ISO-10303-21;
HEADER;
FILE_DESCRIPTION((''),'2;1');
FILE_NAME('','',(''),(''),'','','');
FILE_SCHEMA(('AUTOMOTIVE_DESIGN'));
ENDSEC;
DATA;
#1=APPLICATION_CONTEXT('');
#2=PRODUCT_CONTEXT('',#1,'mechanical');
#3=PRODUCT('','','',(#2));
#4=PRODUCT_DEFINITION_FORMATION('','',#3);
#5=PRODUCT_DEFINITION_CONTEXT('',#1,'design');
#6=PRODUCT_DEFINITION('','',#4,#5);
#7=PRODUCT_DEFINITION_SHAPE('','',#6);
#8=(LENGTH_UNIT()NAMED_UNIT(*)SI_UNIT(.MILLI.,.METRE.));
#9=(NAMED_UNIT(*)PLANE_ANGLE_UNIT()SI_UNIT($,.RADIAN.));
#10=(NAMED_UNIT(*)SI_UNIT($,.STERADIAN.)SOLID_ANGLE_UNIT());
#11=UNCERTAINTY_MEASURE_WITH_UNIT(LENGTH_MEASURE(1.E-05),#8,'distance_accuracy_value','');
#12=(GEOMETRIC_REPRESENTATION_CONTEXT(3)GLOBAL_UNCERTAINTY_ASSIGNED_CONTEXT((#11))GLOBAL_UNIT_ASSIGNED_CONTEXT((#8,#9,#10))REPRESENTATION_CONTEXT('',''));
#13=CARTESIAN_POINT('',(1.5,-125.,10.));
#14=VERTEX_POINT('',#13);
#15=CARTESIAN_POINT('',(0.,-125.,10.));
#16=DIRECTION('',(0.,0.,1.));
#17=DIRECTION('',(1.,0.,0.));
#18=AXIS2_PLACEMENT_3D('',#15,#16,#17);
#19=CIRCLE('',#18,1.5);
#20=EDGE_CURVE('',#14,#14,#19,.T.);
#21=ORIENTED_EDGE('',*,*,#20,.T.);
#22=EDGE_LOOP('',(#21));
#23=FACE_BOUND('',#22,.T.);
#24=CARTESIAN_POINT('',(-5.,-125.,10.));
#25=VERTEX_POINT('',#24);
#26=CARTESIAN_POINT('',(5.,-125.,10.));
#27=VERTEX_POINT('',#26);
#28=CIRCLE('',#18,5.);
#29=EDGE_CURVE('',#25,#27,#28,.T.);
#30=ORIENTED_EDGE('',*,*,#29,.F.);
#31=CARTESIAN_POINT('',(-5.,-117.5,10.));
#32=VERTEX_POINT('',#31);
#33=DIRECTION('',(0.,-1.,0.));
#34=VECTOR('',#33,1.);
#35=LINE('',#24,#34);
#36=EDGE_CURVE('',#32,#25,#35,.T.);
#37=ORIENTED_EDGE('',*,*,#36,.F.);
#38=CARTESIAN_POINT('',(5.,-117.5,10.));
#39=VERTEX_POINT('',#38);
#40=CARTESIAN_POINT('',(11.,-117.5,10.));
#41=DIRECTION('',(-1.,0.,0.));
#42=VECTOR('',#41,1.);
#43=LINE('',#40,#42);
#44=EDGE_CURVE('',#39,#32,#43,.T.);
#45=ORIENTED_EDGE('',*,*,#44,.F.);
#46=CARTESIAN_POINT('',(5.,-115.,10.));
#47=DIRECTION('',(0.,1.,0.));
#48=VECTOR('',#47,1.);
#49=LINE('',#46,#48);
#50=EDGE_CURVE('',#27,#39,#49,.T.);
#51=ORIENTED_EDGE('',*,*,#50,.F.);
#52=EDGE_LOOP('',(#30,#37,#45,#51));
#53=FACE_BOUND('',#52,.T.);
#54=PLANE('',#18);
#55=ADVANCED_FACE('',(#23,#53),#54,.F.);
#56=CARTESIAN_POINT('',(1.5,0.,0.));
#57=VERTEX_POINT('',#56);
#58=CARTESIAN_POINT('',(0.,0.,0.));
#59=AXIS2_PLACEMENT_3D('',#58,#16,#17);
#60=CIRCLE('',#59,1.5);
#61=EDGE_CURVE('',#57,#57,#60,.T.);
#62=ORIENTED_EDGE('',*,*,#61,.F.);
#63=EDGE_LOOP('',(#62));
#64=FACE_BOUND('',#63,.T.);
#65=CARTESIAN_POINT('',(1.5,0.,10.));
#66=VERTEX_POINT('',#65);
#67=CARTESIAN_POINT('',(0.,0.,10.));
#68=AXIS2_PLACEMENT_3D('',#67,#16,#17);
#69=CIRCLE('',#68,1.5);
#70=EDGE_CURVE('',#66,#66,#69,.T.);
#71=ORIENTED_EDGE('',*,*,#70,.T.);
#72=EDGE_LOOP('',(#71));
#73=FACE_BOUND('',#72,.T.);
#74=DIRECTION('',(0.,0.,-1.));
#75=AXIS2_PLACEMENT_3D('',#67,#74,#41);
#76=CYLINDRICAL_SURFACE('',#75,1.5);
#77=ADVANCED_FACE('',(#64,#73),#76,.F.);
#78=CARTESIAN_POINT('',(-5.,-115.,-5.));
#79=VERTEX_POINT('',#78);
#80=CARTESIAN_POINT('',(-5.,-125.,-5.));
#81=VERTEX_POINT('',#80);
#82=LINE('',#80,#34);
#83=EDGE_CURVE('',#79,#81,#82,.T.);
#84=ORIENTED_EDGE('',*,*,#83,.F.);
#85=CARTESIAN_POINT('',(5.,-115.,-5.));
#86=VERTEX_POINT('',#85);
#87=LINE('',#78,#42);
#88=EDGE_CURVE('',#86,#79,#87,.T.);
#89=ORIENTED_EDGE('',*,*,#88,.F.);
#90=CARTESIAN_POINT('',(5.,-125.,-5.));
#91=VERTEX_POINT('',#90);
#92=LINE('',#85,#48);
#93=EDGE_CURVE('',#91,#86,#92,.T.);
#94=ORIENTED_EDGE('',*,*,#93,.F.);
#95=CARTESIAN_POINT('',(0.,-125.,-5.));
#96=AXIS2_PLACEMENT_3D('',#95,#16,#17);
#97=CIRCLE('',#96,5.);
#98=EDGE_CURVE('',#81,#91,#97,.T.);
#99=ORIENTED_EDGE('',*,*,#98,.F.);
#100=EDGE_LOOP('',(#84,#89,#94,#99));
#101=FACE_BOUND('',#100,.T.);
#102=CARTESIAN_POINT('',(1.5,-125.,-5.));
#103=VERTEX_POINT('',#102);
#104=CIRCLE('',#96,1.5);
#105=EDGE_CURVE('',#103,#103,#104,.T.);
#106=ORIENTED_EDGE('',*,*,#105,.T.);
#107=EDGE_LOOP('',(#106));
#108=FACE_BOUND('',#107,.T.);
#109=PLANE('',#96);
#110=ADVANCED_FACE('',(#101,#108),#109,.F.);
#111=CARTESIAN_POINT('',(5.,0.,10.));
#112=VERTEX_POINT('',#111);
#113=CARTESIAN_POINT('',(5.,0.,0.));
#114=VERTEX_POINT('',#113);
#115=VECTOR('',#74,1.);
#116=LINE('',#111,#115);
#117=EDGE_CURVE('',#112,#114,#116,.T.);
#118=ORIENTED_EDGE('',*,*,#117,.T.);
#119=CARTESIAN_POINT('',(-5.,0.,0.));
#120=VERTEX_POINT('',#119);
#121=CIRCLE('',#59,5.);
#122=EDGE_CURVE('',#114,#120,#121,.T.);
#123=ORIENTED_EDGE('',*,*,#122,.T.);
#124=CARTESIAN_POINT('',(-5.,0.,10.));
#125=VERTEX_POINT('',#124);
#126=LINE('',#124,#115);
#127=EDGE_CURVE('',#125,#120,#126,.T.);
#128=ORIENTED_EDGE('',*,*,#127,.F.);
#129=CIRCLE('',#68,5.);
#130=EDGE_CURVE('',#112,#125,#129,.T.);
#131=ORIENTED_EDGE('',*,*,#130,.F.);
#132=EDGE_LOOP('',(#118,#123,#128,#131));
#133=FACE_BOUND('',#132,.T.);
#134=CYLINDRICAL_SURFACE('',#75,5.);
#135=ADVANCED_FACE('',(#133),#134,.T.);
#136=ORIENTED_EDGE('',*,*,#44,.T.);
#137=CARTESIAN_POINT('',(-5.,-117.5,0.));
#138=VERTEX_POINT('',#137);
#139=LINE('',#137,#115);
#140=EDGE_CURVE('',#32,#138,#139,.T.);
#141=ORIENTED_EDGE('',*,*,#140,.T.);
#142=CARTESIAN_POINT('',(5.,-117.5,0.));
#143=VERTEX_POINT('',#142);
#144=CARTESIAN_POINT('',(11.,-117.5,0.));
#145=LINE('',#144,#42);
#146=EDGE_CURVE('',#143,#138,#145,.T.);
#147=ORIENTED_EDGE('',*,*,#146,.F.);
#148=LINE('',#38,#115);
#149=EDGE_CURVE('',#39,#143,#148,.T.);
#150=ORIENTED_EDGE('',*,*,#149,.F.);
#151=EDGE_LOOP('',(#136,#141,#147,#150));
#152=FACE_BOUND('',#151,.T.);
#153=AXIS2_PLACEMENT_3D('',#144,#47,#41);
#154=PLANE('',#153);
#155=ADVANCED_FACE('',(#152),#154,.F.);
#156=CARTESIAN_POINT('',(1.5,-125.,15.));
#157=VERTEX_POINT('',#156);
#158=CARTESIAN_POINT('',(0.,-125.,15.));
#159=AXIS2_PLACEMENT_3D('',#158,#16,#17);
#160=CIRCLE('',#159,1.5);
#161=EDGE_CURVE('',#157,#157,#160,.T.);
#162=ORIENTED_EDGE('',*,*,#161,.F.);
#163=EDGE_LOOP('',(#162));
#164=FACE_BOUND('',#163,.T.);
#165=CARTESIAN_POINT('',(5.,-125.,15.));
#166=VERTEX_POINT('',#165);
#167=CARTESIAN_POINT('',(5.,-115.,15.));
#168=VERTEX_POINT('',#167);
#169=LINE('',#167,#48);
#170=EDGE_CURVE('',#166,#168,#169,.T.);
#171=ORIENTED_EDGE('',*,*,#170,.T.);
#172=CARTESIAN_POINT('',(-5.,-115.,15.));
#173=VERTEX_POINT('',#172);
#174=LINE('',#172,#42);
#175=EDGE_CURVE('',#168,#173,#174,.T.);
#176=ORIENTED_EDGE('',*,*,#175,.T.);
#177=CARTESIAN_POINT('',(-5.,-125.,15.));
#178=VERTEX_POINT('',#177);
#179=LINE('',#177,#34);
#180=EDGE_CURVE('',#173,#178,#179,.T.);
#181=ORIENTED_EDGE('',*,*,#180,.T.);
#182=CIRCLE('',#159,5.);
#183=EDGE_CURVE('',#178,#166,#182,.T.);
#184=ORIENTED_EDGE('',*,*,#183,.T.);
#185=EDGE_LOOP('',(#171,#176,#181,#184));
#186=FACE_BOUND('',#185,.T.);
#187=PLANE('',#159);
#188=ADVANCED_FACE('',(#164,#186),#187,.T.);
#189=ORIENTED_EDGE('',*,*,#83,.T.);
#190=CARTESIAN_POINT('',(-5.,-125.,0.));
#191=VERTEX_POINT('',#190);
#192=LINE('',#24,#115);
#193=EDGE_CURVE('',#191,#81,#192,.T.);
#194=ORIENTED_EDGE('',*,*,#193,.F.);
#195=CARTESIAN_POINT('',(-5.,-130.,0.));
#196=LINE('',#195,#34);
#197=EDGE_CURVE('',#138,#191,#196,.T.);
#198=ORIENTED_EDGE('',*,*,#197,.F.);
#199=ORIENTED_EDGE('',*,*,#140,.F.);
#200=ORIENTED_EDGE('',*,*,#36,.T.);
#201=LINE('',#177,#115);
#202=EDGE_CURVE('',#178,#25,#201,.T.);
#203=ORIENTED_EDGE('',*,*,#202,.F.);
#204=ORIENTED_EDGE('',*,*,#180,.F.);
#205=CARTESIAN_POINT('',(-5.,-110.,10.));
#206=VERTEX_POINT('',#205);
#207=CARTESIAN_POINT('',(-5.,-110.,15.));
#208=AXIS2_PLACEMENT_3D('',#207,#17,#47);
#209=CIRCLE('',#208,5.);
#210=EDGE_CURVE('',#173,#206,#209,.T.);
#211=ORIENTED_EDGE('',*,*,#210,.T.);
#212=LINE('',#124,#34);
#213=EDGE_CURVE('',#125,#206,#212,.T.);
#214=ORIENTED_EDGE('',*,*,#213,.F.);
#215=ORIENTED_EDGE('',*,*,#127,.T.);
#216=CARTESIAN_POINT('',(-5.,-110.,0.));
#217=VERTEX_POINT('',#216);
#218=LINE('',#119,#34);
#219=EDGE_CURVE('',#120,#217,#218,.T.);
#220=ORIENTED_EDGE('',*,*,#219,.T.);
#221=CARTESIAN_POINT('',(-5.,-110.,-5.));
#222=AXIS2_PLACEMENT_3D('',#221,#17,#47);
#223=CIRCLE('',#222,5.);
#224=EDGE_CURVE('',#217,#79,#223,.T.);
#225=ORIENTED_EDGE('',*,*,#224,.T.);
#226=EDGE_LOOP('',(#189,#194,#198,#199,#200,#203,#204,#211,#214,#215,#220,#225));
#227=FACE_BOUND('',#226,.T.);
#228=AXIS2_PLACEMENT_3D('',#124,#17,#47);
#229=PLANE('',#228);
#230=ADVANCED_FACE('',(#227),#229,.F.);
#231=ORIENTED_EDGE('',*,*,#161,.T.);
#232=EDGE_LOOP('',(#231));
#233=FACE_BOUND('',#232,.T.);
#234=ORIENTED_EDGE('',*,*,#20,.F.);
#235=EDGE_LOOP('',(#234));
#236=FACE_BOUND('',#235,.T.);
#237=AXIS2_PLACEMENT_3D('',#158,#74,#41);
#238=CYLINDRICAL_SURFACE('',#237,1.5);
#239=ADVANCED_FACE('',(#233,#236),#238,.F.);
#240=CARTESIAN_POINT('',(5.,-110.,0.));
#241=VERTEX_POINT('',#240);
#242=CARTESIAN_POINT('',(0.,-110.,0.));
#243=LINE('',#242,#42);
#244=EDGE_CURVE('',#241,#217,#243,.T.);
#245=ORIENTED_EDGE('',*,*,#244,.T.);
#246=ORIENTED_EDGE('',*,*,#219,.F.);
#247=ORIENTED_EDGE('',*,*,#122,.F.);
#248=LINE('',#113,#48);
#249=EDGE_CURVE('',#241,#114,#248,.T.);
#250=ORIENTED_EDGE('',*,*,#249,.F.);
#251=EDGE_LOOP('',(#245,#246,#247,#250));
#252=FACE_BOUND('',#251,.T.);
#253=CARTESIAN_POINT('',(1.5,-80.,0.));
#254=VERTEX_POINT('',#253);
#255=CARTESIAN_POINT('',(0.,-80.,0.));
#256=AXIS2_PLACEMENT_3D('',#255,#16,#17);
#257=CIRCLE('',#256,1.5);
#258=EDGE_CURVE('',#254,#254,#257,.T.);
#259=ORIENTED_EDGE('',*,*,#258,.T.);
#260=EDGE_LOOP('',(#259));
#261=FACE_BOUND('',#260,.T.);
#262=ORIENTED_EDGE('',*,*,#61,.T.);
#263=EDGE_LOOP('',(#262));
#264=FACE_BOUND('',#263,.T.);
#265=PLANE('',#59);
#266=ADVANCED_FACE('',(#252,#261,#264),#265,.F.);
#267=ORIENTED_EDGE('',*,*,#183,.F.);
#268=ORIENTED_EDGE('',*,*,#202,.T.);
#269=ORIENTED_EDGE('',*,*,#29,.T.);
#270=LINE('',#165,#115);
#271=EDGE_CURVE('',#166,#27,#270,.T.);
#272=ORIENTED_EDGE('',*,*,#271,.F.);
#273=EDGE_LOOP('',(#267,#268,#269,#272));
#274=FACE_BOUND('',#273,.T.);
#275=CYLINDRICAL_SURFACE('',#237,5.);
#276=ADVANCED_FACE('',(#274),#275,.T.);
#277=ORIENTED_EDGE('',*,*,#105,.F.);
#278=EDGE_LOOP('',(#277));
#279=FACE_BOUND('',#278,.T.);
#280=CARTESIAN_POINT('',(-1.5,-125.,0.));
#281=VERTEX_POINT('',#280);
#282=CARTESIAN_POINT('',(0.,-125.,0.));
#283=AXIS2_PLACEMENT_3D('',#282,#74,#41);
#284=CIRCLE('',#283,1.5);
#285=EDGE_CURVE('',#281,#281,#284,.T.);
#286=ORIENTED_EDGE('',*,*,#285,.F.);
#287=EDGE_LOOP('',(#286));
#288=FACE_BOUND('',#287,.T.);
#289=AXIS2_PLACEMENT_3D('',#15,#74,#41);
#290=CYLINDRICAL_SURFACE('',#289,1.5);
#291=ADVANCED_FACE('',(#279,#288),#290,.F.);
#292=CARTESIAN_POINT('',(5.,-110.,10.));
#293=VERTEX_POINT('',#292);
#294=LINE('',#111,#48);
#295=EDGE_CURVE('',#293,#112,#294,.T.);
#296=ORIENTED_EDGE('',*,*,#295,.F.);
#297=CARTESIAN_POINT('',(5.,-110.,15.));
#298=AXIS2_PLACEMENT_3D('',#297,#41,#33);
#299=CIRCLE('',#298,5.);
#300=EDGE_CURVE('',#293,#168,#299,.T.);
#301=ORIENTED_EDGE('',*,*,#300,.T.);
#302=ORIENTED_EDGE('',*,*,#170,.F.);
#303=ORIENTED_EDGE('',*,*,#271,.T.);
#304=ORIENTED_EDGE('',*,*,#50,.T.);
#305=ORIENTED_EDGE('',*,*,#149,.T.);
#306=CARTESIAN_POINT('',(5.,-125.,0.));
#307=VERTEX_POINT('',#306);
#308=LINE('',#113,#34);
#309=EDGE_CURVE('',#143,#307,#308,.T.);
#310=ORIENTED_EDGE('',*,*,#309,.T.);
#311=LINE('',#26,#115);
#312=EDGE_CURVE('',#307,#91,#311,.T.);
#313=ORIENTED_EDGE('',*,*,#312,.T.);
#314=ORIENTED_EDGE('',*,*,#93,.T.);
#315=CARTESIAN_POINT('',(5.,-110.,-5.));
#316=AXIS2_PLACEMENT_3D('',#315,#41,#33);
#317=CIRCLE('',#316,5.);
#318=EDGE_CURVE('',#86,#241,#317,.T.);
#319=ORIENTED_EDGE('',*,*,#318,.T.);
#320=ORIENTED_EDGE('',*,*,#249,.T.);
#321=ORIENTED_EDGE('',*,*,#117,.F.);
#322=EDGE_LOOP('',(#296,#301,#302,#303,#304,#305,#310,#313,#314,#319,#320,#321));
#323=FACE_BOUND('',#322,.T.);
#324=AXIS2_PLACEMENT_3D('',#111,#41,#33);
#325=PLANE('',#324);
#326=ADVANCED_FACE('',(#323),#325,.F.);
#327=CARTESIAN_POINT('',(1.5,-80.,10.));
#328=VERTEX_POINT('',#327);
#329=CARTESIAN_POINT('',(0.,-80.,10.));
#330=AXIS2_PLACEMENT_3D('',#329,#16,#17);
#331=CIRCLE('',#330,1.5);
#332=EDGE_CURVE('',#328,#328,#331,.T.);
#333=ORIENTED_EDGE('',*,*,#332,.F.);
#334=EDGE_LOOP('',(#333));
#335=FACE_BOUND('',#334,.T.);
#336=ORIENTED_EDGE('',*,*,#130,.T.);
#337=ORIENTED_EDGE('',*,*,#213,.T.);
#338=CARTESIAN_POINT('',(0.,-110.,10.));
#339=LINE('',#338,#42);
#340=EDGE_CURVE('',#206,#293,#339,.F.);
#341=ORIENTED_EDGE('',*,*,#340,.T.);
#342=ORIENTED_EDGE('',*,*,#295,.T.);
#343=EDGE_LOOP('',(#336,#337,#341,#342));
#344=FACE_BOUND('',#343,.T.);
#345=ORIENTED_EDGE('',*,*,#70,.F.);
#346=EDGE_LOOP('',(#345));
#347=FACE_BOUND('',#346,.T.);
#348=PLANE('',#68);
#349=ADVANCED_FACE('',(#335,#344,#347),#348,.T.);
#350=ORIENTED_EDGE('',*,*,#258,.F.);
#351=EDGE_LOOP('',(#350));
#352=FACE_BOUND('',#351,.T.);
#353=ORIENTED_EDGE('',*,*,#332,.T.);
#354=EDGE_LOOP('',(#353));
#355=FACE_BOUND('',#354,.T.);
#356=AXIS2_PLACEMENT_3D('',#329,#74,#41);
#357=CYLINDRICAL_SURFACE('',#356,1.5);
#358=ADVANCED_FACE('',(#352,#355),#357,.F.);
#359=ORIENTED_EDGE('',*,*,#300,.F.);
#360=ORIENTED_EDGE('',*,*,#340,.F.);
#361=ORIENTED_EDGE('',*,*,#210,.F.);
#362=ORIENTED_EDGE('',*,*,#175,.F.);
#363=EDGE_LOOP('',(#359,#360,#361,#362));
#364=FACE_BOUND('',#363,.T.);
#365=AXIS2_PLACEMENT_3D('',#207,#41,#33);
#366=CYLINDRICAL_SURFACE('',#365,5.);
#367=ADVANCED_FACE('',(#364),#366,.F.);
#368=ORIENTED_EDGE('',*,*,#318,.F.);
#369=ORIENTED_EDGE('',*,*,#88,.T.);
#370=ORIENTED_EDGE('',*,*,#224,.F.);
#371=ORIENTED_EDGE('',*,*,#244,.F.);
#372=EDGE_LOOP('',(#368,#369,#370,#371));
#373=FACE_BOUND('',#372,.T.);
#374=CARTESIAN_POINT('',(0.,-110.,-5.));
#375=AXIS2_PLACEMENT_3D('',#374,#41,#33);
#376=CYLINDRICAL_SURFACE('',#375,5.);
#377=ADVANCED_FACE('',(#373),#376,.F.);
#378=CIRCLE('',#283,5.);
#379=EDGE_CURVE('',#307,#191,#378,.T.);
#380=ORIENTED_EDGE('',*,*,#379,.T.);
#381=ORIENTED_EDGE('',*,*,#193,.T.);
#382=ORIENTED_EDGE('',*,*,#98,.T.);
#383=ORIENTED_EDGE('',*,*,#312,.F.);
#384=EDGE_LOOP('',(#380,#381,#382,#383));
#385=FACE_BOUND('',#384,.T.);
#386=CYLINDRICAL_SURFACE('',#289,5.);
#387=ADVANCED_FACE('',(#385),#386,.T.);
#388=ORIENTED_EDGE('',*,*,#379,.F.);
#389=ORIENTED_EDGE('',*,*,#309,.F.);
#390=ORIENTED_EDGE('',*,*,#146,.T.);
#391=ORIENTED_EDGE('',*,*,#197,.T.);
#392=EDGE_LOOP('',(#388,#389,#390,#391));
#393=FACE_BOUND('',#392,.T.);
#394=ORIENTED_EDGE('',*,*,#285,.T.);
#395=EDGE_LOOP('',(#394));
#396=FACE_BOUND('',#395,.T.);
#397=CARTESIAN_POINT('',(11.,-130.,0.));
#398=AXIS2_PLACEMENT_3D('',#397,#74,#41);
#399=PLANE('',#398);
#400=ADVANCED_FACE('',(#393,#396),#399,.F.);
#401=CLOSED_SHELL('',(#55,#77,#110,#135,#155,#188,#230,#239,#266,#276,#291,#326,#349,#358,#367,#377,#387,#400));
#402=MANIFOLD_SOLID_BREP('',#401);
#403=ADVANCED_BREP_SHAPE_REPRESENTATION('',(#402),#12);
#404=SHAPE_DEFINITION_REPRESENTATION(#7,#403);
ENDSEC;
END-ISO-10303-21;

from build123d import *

# Parameters (mm, degrees)
CROQUIS1_R              = 1.5
SALIENTE_EXTRUIR1_DEPTH = 10
SALIENTE_EXTRUIR2_START = -5
CROQUIS3_R              = 1.5
SALIENTE_EXTRUIR2_DEPTH = 5
CROQUIS5_W              = 10
CROQUIS5_H              = 12.5
CORTAR_EXTRUIR1_DEPTH   = 16
CROQUIS2_R              = 1.5
SALIENTE_EXTRUIR3_DEPTH = 5
REDONDEO1_R             = 5


with BuildPart() as part:
    # Croquis1 → Saliente-Extruir1 (new body)
    with BuildSketch(Plane.XY):
        with BuildLine():
            Line((5, 0), (5, -125))
            ThreePointArc((5, -125), (0, -130), (-5, -125))
            Line((-5, -125), (-5, 0))
            ThreePointArc((-5, 0), (0, 5), (5, 0))
        make_face()
        Circle(CROQUIS1_R, mode=Mode.SUBTRACT)
        with Locations((0, -125)):
            Circle(CROQUIS1_R, mode=Mode.SUBTRACT)
        with Locations((0, -80)):
            Circle(CROQUIS1_R, mode=Mode.SUBTRACT)
    extrude(amount=SALIENTE_EXTRUIR1_DEPTH)

    # Croquis3 → Saliente-Extruir2 (add)
    with BuildSketch(Plane.XY.offset(SALIENTE_EXTRUIR2_START)):
        with BuildLine():
            Line((-5, -125), (-5, -115))
            Line((-5, -115), (5, -115))
            Line((5, -115), (5, -125))
            ThreePointArc((5, -125), (0, -130), (-5, -125))
        make_face()
        with Locations((0, -125)):
            Circle(CROQUIS3_R, mode=Mode.SUBTRACT)
    extrude(amount=SALIENTE_EXTRUIR2_DEPTH)

    # Croquis5 → Cortar-Extruir1 (cut)
    with BuildSketch(Plane.ZY.offset(5)):
        with Locations((5, -123.75)):
            Rectangle(CROQUIS5_W, CROQUIS5_H)
    extrude(amount=-CORTAR_EXTRUIR1_DEPTH, mode=Mode.SUBTRACT)

    # Croquis2 → Saliente-Extruir3 (add)
    with BuildSketch(Plane.XY.offset(10)):
        with BuildLine():
            Line((-5, -125), (-5, -115))
            Line((-5, -115), (5, -115))
            Line((5, -115), (5, -125))
            ThreePointArc((5, -125), (0, -130), (-5, -125))
        make_face()
        with Locations(Location((0, -125, 0), (0, 0, 180))):
            Circle(CROQUIS2_R, mode=Mode.SUBTRACT)
    extrude(amount=SALIENTE_EXTRUIR3_DEPTH)

    # Redondeo1
    redondeo1_edges = [part.edges().sort_by_distance(p)[0] for p in [
        (0, -115, 10),
        (0, -115, 0),
    ]]
    fillet(redondeo1_edges, radius=REDONDEO1_R - 0.0001)  # a hair under: the kernel refuses the full size


solid = part.part
